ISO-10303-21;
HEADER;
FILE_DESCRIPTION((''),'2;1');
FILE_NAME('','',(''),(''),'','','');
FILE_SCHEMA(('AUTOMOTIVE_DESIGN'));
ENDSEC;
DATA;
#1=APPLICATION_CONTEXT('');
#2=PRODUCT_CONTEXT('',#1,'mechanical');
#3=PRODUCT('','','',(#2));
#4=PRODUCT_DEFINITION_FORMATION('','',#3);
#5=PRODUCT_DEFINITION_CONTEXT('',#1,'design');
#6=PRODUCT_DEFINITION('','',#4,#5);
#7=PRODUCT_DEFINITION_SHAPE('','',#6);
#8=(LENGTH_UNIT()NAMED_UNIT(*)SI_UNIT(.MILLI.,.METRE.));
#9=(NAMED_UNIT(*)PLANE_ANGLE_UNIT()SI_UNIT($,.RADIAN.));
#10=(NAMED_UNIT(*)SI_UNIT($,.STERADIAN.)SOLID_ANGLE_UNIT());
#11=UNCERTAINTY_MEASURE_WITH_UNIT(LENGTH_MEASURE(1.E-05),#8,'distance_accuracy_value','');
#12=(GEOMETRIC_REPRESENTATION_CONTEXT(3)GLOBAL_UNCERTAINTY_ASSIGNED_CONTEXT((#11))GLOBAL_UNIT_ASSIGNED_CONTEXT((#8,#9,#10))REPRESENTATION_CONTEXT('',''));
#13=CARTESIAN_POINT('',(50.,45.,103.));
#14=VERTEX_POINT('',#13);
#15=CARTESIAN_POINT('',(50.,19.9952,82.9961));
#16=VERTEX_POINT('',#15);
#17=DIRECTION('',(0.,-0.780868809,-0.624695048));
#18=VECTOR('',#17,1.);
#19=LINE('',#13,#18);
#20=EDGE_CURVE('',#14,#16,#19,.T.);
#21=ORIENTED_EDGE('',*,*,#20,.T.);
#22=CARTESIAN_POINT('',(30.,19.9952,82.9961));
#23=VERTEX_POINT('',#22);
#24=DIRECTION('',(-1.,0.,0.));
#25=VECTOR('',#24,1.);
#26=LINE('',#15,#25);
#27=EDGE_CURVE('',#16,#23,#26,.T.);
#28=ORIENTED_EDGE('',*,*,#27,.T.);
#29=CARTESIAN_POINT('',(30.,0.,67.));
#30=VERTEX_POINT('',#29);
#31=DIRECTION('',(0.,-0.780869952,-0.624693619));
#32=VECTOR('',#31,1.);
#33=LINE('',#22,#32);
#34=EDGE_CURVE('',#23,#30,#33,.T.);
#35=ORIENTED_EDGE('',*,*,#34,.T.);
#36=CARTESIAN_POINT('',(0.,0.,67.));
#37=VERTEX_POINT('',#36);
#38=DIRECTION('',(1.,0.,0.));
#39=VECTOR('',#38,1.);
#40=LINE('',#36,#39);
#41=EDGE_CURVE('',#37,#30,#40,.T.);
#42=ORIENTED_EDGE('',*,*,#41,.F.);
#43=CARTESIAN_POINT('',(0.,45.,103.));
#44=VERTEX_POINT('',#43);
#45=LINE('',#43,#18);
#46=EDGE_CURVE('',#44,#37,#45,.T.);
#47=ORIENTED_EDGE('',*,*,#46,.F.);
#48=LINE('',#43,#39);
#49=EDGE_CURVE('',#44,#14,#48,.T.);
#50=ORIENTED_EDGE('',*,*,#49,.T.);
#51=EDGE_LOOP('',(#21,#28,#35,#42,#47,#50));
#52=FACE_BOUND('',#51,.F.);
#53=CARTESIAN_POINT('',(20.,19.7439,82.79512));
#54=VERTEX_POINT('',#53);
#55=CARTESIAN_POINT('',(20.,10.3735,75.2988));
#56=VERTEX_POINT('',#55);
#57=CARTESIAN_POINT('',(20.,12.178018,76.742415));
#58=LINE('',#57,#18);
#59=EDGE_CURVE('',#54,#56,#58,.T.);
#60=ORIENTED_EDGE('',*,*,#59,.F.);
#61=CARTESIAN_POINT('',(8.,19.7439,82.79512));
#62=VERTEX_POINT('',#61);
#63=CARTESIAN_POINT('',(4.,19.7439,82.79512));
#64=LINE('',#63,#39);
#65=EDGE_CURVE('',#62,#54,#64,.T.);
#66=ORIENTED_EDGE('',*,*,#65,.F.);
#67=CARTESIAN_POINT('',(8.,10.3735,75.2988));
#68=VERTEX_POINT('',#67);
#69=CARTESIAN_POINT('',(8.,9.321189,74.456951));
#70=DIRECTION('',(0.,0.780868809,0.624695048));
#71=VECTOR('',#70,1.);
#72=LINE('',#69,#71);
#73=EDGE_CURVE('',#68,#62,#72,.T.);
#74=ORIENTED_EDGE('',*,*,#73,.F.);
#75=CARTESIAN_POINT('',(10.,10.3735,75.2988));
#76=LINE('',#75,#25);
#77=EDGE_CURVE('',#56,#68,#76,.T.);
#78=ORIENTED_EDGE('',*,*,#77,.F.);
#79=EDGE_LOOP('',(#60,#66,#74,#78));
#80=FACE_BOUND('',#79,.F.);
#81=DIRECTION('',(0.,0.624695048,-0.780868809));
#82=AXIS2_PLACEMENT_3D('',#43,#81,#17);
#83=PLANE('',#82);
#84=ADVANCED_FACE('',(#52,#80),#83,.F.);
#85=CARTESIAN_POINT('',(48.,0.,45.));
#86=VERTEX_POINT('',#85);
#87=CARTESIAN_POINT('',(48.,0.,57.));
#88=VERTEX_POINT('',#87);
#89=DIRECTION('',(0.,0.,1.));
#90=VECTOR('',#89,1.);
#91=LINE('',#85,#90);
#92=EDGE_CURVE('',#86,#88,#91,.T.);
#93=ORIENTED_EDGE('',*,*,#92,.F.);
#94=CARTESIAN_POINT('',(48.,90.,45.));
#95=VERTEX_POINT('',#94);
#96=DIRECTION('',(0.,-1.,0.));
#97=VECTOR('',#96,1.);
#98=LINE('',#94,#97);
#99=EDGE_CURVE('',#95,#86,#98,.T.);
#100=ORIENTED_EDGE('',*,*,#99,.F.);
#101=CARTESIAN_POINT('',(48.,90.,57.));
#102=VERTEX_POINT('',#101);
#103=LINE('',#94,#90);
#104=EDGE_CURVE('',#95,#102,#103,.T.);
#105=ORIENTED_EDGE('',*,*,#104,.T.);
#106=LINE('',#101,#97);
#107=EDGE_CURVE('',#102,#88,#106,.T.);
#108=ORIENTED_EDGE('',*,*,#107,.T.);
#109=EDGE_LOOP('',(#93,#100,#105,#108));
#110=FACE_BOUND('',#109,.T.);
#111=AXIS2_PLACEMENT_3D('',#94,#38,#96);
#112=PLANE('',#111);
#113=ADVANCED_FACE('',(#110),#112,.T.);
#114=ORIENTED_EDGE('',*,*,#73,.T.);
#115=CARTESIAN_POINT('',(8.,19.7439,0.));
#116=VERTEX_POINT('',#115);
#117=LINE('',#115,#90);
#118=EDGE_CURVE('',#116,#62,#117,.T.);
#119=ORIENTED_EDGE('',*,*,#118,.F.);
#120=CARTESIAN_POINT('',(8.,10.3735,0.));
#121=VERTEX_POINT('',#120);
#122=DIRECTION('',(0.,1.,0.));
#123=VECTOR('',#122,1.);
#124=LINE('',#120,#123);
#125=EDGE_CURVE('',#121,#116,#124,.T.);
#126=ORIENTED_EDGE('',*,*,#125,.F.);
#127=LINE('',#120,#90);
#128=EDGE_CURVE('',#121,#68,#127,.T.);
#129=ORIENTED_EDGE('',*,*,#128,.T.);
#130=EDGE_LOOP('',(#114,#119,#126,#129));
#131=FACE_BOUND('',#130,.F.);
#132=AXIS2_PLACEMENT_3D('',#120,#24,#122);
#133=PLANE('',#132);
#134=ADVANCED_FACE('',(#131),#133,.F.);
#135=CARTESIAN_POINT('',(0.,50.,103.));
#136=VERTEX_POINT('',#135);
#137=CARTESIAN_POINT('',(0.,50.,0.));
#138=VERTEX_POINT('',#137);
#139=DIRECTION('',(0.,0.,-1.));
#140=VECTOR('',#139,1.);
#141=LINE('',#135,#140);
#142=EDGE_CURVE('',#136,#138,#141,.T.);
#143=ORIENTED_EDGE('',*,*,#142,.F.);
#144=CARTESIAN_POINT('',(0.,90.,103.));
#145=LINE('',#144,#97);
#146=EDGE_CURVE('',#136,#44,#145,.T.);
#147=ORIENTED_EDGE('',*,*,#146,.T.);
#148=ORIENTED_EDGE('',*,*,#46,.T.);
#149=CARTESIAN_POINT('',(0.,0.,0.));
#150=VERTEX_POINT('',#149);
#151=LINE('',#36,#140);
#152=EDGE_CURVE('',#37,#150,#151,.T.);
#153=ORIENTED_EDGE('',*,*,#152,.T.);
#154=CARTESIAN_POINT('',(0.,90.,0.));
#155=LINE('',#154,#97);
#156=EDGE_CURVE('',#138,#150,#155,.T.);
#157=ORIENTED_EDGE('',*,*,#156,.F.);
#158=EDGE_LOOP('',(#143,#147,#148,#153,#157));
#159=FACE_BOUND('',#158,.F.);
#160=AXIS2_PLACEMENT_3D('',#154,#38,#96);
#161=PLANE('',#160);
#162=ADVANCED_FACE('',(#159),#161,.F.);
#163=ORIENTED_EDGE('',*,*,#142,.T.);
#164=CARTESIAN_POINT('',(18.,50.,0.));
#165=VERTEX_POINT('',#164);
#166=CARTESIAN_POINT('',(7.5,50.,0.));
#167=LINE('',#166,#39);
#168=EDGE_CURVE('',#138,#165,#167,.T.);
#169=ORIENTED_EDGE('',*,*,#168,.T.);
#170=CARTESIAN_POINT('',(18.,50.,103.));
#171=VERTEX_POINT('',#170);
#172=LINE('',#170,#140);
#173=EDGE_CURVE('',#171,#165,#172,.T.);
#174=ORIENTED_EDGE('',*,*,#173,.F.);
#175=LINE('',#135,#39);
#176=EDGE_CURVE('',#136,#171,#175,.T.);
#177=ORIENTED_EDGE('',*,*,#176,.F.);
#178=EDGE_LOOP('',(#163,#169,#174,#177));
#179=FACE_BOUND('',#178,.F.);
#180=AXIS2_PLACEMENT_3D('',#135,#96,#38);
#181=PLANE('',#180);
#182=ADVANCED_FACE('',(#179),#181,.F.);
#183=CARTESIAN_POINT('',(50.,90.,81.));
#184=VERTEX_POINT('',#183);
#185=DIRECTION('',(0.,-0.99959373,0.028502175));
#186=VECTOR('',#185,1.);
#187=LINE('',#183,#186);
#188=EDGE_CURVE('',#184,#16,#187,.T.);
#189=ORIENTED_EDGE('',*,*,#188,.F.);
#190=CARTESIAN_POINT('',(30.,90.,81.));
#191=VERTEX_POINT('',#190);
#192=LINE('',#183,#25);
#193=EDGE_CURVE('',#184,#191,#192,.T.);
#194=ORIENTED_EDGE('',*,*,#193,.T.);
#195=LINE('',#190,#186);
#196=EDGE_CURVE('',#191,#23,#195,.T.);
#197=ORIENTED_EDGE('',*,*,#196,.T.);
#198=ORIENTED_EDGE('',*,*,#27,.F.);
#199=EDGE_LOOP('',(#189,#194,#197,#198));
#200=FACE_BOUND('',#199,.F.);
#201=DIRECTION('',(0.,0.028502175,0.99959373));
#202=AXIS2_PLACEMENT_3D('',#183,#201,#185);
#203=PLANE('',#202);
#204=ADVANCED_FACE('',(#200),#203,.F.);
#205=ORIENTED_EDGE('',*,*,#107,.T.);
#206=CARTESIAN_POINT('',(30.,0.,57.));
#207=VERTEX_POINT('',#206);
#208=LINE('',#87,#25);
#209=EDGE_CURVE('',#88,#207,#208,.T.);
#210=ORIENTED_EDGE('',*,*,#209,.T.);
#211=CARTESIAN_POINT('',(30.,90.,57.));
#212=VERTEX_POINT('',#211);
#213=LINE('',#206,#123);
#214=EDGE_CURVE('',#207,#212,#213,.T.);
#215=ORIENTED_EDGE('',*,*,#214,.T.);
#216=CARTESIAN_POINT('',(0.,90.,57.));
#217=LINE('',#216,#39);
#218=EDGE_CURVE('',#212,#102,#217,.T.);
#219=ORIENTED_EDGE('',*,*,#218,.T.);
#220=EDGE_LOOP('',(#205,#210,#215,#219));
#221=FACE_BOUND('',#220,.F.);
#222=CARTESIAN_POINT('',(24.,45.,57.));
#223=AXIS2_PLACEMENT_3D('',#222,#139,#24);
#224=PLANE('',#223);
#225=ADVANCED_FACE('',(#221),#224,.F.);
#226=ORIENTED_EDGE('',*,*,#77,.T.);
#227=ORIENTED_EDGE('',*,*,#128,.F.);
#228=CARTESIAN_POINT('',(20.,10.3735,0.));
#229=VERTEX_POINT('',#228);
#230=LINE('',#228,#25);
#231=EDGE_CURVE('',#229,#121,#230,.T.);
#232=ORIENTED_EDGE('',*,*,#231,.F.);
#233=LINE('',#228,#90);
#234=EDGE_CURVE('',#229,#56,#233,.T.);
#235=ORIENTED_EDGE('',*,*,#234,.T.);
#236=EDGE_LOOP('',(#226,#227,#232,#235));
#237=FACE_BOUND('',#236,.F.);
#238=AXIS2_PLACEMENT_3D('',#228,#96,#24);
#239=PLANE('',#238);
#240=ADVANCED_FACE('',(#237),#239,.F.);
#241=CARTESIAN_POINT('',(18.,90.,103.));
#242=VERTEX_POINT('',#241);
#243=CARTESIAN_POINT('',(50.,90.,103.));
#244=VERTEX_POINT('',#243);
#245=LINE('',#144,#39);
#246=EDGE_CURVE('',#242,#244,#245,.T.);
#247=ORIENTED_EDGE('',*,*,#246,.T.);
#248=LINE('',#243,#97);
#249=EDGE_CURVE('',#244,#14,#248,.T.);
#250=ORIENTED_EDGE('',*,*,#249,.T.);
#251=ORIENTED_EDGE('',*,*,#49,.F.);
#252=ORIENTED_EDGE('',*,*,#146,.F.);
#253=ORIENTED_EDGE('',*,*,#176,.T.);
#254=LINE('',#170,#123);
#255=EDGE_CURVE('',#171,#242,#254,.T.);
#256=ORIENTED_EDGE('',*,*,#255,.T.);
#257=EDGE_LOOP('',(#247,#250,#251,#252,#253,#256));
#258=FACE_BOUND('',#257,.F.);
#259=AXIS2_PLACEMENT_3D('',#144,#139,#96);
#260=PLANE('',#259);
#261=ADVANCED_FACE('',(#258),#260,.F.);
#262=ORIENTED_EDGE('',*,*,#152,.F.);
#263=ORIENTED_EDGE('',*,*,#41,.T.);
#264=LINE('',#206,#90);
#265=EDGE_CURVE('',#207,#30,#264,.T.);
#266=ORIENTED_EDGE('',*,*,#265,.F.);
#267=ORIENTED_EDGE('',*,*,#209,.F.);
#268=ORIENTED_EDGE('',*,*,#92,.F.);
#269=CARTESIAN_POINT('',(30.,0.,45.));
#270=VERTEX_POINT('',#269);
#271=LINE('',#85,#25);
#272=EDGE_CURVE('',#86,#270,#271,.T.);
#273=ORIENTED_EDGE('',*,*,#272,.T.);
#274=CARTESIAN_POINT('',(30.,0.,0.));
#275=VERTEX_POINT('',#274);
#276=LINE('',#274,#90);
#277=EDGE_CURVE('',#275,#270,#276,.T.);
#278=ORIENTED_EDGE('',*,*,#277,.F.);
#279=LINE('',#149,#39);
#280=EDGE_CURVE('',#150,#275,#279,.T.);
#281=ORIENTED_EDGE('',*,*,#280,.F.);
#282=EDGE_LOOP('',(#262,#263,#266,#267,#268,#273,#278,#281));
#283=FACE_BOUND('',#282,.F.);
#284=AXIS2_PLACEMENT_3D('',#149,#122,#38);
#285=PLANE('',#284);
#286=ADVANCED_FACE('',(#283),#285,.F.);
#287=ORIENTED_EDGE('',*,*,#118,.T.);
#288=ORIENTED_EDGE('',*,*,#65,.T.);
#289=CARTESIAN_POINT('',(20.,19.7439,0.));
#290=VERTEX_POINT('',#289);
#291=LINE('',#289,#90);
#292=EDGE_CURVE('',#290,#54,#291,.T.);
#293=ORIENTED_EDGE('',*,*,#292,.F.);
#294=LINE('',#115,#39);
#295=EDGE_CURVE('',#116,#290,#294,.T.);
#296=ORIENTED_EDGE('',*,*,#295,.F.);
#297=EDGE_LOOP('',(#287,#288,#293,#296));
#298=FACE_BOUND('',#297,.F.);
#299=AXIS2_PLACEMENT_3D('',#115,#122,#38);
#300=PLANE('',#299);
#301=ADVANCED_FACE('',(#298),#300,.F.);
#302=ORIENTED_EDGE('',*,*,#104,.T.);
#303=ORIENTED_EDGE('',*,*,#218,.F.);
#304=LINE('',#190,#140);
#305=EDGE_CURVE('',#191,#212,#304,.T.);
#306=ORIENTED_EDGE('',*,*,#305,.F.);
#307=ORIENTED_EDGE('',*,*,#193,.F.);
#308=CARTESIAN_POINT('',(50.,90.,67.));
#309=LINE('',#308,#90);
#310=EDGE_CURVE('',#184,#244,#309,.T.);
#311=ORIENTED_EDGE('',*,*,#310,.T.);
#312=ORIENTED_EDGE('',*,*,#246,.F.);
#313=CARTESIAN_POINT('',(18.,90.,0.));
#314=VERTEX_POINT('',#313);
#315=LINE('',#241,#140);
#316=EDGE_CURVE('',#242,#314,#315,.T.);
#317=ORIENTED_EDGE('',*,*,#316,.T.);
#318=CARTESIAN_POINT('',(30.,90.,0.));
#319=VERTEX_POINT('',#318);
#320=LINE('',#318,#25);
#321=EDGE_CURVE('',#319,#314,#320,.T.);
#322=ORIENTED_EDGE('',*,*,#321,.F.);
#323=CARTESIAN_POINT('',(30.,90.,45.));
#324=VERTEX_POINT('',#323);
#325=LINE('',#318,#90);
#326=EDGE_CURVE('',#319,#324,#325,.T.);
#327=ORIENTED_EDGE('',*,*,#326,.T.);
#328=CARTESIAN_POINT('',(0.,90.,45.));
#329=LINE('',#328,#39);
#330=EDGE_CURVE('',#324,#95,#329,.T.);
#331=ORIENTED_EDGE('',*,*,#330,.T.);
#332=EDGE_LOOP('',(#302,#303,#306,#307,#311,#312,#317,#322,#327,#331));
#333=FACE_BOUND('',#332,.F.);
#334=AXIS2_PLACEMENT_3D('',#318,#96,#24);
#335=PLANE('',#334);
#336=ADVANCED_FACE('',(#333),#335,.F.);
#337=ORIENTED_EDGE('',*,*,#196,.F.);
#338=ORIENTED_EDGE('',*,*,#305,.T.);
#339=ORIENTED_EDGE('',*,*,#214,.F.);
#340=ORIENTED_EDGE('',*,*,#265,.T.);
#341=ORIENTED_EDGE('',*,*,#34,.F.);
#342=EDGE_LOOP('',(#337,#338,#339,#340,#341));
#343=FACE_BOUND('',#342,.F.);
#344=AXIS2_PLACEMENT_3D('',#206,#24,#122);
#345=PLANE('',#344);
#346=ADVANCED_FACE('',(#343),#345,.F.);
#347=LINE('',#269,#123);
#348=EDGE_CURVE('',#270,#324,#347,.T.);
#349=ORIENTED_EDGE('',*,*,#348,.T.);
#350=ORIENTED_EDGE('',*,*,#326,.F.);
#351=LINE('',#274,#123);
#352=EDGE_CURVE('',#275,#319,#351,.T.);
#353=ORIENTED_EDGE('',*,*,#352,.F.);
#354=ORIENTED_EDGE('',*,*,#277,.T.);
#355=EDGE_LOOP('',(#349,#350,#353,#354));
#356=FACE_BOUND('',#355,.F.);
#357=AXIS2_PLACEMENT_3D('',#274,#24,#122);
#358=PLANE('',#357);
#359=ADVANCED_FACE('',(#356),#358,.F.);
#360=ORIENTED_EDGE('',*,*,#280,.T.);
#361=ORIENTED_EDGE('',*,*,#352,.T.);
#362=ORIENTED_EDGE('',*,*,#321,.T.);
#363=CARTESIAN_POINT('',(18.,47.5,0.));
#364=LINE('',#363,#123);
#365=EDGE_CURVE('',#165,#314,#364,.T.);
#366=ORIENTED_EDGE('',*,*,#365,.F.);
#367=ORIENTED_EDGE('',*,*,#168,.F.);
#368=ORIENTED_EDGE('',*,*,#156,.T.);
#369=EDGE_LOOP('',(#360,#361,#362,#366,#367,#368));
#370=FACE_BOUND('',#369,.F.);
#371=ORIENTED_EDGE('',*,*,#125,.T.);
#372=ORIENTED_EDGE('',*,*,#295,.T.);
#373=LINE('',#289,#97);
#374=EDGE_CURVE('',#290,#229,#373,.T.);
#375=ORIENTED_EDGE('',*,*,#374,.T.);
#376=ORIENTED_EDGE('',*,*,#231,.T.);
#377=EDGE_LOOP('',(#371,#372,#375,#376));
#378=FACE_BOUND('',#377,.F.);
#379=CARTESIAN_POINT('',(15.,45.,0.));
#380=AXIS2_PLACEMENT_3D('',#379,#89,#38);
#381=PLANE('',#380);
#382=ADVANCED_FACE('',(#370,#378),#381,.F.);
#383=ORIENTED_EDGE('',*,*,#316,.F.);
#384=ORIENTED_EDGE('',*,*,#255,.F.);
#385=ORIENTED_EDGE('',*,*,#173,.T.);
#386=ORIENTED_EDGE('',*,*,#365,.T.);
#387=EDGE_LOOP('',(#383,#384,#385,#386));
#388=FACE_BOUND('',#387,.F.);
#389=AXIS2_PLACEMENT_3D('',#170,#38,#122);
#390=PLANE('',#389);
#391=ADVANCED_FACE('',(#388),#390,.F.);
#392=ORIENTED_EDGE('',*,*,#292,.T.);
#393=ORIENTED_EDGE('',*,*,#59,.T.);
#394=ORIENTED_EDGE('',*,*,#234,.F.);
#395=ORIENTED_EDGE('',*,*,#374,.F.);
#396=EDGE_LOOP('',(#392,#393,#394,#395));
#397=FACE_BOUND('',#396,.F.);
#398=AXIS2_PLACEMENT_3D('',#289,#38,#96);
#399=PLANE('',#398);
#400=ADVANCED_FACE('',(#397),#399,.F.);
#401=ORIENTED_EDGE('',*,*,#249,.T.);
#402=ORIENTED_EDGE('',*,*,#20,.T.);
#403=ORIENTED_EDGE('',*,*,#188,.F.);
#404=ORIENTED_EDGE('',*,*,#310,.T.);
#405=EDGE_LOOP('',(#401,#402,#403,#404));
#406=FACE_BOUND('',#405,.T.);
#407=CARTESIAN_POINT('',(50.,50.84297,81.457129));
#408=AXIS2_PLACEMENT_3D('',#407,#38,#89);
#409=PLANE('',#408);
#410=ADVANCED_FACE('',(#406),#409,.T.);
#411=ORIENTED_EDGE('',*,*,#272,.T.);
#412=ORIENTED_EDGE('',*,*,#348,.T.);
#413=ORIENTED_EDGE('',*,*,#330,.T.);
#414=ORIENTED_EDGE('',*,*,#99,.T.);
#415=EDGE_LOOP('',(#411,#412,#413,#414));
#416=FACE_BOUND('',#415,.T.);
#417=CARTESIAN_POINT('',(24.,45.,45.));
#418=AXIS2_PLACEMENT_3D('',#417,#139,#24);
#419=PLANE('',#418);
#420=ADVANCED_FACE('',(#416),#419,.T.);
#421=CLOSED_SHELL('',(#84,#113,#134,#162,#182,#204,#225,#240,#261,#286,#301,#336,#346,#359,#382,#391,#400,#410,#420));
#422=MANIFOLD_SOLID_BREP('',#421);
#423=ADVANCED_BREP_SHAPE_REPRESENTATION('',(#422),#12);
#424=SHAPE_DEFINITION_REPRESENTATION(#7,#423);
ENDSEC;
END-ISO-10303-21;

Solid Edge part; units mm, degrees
sketch "Sketch1" plane through (0, 0, 0) normal (0, 0, 1) x (1, 0, 0)
  line L0 (30, 0) -> (30, 90)
  line L1 (30, 90) -> (0, 90)
  line L2 (0, 90) -> (0, 0)
  line L3 (0, 0) -> (30, 0)
extrude "Protrusion1" add sketch "Sketch1" along normal blind 45
sketch "Sketch2" plane through (15, 45, 45) normal (0, 0, 1) x (1, 0, 0)
  line L0 (-15, 45) -> (33, 45)
  line L1 (33, 45) -> (33, -45)
  line L2 (33, -45) -> (-15, -45)
  line L3 (-15, -45) -> (-15, 45)
extrude "ExtrudedProtrusion_2" add sketch "Sketch2" along normal blind 12
sketch "Sketch3" plane through (24, 45, 57) normal (0, 0, 1) x (1, 0, 0)
  line L0 (-24, -45) -> (6, -45)
  line L1 (6, -45) -> (6, 45)
  line L2 (6, 45) -> (-24, 45)
  line L3 (-24, 45) -> (-24, -45)
extrude "ExtrudedProtrusion_3" add sketch "Sketch3" along normal blind 10
sketch "Sketch4" plane through (0, 45, 33.5) normal (-1, 0, 0) x (0, 0, 1)
  line L0 (69.5, 45) -> (69.5, 0)
  line L1 (69.5, 0) -> (33.5, -45)
  line L2 (33.5, 45) -> (33.5, -45)
  line L3 (33.5, 45) -> (69.5, 45)
extrude "ExtrudedProtrusion_5" add sketch "Sketch4" against normal blind 50
sketch "Sketch5" plane through (50, 45, 85) normal (1, 0, 0) x (0, 1, 0)
  line L0 (45, -18) -> (45, -4)
  line L1 (45, -4) -> (-25.0048, -2.0039)
  line L2 (-25.0048, -2.0039) -> (-45, -18)
  line L3 (-45, -18) -> (45, -18)
extrude "ExtrudedCutout_6" cut sketch "Sketch5" against normal blind 20
sketch "Sketch6" plane through (15, 45, 0) normal (0, 0, -1) x (0, 1, 0)
  line L0 (-25.2561, -7) -> (-25.2561, 5)
  line L1 (-25.2561, 5) -> (-34.6265, 5)
  line L2 (-34.6265, 5) -> (-34.6265, -7)
  line L3 (-34.6265, -7) -> (-25.2561, -7)
extrude "ExtrudedCutout_7" cut sketch "Sketch6" against normal blind 588.5853
sketch "Sketch7" plane through (25, 67.5, 103) normal (0, 0, 1) x (0, 1, 0)
  line L0 (22.5, 25) -> (-17.5, 25)
  line L1 (-17.5, 25) -> (-17.5, 7)
  line L2 (-17.5, 7) -> (22.5, 7)
  line L3 (22.5, 7) -> (22.5, 25)
extrude "ExtrudedCutout_8" cut sketch "Sketch7" against normal blind 143.8541
